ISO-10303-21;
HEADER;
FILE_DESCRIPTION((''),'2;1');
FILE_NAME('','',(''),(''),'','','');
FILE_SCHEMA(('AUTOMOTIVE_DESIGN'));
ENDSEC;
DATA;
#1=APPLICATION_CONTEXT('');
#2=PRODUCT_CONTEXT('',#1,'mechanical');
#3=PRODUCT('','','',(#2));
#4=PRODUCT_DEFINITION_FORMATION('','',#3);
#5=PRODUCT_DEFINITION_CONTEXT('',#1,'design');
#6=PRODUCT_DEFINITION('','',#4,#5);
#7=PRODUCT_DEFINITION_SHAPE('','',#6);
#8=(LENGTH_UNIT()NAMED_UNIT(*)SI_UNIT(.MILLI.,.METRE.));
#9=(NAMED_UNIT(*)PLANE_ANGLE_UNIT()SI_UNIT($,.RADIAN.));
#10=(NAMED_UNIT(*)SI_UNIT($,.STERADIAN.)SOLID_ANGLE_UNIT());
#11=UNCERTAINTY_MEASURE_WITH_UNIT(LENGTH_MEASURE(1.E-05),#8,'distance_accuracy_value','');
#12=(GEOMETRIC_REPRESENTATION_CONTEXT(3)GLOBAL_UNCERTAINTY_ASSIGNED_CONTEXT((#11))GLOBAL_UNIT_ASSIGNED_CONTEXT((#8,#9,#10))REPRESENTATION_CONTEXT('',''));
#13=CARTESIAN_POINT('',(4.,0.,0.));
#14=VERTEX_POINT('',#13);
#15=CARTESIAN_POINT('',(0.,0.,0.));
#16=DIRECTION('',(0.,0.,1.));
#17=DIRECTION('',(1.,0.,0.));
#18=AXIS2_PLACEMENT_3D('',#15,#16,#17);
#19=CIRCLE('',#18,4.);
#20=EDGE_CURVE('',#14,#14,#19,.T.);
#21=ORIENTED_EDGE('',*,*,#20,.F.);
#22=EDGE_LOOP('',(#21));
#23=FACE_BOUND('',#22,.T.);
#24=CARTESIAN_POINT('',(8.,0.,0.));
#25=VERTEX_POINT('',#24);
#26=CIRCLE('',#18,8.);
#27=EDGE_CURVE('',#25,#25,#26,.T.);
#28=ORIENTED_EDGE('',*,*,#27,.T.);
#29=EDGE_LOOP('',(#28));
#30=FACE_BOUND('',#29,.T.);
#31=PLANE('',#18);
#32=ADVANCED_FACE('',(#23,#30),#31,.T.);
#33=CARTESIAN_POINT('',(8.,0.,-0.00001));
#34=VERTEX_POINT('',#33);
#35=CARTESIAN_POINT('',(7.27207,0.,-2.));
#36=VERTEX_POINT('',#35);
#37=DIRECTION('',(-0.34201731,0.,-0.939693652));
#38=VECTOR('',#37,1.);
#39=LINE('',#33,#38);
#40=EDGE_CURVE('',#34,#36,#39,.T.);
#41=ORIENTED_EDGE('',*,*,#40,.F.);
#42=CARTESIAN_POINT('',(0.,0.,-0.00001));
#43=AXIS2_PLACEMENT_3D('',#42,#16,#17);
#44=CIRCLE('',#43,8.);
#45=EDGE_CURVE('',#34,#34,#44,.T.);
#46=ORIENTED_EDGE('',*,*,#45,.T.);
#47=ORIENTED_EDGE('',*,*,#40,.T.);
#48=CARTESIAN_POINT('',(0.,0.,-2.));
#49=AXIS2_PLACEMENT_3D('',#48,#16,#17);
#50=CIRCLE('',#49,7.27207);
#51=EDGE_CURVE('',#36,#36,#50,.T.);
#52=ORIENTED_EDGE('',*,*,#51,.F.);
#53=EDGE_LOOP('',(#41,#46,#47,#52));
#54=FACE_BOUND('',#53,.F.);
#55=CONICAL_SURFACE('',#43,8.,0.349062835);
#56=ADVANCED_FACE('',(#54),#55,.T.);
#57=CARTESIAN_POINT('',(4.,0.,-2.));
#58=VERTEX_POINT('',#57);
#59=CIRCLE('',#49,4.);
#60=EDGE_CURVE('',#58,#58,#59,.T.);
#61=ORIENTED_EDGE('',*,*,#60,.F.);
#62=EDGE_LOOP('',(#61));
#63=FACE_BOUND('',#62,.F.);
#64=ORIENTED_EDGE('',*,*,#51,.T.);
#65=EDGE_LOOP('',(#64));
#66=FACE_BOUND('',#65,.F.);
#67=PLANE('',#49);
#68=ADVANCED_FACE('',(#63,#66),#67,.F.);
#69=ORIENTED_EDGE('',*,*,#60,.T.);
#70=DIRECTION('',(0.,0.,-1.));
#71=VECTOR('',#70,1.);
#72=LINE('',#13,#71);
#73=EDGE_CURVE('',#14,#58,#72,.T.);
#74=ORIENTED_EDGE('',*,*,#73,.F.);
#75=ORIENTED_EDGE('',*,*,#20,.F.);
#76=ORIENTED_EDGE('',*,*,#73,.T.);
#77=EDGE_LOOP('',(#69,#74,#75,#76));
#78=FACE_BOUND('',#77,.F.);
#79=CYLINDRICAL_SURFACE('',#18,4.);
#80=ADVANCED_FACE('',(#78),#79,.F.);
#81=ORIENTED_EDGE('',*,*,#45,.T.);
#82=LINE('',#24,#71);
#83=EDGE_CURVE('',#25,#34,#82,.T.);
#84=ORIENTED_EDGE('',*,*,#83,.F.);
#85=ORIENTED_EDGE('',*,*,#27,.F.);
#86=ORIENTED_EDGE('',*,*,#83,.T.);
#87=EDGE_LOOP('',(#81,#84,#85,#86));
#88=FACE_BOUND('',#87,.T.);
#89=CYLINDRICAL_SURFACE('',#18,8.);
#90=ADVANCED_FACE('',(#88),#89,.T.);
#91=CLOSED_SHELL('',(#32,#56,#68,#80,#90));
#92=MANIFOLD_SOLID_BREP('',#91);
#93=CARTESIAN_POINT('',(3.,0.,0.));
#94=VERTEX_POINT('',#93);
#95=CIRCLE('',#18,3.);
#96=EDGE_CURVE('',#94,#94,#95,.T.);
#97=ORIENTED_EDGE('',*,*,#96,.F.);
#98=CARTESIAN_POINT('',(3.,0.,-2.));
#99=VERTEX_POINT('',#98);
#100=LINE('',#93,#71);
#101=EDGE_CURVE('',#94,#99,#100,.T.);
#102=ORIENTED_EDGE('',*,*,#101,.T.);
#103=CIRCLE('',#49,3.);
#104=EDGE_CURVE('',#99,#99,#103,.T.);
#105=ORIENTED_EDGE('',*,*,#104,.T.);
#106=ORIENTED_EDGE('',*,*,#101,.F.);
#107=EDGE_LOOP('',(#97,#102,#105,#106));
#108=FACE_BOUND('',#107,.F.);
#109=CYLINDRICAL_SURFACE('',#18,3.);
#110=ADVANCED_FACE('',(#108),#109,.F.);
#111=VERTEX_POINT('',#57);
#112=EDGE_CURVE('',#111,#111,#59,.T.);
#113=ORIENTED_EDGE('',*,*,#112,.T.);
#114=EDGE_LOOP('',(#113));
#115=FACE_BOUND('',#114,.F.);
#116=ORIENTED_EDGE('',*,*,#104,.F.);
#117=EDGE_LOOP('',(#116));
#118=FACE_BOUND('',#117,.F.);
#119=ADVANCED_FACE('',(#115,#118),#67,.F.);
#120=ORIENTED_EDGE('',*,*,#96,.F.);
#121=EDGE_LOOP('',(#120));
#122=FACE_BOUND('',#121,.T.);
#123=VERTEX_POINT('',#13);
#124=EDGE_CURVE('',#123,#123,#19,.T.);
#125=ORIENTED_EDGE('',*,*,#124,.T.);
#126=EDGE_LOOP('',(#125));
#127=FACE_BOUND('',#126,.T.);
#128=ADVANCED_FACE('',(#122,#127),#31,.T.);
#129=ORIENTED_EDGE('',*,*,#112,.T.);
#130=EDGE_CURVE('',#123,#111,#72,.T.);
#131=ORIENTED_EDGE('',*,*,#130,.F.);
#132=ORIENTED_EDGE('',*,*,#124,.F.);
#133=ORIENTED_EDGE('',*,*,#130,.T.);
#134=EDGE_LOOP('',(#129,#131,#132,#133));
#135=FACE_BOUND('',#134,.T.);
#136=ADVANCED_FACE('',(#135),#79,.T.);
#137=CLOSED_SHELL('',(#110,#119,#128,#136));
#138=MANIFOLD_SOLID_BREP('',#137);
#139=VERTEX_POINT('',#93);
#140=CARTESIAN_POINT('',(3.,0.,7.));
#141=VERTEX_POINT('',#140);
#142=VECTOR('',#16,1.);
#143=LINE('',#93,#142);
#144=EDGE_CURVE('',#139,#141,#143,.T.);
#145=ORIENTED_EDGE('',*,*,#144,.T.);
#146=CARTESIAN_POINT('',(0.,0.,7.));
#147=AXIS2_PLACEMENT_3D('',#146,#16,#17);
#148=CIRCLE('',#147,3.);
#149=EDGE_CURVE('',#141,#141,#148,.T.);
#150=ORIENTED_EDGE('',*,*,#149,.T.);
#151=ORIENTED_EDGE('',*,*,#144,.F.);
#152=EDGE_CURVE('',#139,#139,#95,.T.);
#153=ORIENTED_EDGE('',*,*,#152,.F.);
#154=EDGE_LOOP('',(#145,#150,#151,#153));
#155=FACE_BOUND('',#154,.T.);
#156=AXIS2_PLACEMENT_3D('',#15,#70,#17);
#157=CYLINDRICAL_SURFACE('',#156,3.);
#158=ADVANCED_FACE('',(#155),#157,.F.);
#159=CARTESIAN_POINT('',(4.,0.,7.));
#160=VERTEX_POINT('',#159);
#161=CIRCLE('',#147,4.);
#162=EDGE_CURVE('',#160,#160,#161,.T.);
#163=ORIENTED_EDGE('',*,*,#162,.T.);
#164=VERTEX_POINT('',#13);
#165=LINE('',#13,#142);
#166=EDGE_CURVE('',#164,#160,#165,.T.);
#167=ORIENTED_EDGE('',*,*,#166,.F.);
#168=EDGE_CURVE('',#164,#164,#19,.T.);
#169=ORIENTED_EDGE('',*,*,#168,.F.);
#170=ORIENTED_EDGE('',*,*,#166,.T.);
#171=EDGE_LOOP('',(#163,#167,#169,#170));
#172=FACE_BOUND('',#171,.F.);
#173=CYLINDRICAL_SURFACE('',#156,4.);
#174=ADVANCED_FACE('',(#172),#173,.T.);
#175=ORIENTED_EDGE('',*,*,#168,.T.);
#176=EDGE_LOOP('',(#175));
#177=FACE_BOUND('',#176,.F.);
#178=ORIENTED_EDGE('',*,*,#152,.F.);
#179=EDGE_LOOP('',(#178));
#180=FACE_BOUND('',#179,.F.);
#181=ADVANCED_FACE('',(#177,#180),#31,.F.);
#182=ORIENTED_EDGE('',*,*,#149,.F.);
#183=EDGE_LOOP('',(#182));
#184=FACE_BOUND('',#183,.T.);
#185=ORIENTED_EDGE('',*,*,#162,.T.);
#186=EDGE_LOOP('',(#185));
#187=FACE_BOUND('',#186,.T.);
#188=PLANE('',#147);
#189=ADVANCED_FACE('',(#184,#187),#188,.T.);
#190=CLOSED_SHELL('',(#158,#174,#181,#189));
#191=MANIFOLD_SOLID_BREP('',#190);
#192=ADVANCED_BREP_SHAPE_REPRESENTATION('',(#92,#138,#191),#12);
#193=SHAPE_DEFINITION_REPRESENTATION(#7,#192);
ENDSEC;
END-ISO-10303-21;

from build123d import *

# Parameters (mm, degrees)
F0_R     = 4
F0_R_2   = 3
F1_DEPTH = 7
F0_R_3   = 8
F2_DEPTH = 2
F3_SIZE2 = 0.72793
F3_SIZE  = 1.99999
F4_DEPTH = 2


# Not quite as in the source:
# - a fillet or chamfer is up to 0.001 mm smaller than in the source, because OpenCascade refuses the exact size


with BuildPart() as f1:
    # F0 (on Top) → F1 (new body)
    with BuildSketch(Plane.XY):
        Circle(F0_R)
        Circle(F0_R_2, mode=Mode.SUBTRACT)
    extrude(amount=F1_DEPTH)


with BuildPart() as f2:
    # F0 (on Top) → F2 (new body)
    with BuildSketch(Plane.XY):
        Circle(F0_R_3)
        Circle(F0_R, mode=Mode.SUBTRACT)
    extrude(amount=-F2_DEPTH)

    # F3 (size 2 and 0.7279404685 in the source; OpenCascade refuses exactly that, so slightly less here)
    f3_edges = [f2.edges().sort_by_distance(p)[0] for p in [
        (-8, 0, -2),
    ]]
    f3_side = f2.faces().sort_by_distance((-8, 0, -1))[0]
    chamfer(f3_edges, length=F3_SIZE, length2=F3_SIZE2, reference=f3_side)


with BuildPart() as f4:
    # F4 (new): a face of the model
    f4_faces = [f1.part.faces().sort_by_distance(p)[0] for p in [
        (-3.886862915, 0, 0),
    ]]
    extrude(f4_faces, amount=F4_DEPTH)


solid = Compound([f1.part, f2.part, f4.part])
